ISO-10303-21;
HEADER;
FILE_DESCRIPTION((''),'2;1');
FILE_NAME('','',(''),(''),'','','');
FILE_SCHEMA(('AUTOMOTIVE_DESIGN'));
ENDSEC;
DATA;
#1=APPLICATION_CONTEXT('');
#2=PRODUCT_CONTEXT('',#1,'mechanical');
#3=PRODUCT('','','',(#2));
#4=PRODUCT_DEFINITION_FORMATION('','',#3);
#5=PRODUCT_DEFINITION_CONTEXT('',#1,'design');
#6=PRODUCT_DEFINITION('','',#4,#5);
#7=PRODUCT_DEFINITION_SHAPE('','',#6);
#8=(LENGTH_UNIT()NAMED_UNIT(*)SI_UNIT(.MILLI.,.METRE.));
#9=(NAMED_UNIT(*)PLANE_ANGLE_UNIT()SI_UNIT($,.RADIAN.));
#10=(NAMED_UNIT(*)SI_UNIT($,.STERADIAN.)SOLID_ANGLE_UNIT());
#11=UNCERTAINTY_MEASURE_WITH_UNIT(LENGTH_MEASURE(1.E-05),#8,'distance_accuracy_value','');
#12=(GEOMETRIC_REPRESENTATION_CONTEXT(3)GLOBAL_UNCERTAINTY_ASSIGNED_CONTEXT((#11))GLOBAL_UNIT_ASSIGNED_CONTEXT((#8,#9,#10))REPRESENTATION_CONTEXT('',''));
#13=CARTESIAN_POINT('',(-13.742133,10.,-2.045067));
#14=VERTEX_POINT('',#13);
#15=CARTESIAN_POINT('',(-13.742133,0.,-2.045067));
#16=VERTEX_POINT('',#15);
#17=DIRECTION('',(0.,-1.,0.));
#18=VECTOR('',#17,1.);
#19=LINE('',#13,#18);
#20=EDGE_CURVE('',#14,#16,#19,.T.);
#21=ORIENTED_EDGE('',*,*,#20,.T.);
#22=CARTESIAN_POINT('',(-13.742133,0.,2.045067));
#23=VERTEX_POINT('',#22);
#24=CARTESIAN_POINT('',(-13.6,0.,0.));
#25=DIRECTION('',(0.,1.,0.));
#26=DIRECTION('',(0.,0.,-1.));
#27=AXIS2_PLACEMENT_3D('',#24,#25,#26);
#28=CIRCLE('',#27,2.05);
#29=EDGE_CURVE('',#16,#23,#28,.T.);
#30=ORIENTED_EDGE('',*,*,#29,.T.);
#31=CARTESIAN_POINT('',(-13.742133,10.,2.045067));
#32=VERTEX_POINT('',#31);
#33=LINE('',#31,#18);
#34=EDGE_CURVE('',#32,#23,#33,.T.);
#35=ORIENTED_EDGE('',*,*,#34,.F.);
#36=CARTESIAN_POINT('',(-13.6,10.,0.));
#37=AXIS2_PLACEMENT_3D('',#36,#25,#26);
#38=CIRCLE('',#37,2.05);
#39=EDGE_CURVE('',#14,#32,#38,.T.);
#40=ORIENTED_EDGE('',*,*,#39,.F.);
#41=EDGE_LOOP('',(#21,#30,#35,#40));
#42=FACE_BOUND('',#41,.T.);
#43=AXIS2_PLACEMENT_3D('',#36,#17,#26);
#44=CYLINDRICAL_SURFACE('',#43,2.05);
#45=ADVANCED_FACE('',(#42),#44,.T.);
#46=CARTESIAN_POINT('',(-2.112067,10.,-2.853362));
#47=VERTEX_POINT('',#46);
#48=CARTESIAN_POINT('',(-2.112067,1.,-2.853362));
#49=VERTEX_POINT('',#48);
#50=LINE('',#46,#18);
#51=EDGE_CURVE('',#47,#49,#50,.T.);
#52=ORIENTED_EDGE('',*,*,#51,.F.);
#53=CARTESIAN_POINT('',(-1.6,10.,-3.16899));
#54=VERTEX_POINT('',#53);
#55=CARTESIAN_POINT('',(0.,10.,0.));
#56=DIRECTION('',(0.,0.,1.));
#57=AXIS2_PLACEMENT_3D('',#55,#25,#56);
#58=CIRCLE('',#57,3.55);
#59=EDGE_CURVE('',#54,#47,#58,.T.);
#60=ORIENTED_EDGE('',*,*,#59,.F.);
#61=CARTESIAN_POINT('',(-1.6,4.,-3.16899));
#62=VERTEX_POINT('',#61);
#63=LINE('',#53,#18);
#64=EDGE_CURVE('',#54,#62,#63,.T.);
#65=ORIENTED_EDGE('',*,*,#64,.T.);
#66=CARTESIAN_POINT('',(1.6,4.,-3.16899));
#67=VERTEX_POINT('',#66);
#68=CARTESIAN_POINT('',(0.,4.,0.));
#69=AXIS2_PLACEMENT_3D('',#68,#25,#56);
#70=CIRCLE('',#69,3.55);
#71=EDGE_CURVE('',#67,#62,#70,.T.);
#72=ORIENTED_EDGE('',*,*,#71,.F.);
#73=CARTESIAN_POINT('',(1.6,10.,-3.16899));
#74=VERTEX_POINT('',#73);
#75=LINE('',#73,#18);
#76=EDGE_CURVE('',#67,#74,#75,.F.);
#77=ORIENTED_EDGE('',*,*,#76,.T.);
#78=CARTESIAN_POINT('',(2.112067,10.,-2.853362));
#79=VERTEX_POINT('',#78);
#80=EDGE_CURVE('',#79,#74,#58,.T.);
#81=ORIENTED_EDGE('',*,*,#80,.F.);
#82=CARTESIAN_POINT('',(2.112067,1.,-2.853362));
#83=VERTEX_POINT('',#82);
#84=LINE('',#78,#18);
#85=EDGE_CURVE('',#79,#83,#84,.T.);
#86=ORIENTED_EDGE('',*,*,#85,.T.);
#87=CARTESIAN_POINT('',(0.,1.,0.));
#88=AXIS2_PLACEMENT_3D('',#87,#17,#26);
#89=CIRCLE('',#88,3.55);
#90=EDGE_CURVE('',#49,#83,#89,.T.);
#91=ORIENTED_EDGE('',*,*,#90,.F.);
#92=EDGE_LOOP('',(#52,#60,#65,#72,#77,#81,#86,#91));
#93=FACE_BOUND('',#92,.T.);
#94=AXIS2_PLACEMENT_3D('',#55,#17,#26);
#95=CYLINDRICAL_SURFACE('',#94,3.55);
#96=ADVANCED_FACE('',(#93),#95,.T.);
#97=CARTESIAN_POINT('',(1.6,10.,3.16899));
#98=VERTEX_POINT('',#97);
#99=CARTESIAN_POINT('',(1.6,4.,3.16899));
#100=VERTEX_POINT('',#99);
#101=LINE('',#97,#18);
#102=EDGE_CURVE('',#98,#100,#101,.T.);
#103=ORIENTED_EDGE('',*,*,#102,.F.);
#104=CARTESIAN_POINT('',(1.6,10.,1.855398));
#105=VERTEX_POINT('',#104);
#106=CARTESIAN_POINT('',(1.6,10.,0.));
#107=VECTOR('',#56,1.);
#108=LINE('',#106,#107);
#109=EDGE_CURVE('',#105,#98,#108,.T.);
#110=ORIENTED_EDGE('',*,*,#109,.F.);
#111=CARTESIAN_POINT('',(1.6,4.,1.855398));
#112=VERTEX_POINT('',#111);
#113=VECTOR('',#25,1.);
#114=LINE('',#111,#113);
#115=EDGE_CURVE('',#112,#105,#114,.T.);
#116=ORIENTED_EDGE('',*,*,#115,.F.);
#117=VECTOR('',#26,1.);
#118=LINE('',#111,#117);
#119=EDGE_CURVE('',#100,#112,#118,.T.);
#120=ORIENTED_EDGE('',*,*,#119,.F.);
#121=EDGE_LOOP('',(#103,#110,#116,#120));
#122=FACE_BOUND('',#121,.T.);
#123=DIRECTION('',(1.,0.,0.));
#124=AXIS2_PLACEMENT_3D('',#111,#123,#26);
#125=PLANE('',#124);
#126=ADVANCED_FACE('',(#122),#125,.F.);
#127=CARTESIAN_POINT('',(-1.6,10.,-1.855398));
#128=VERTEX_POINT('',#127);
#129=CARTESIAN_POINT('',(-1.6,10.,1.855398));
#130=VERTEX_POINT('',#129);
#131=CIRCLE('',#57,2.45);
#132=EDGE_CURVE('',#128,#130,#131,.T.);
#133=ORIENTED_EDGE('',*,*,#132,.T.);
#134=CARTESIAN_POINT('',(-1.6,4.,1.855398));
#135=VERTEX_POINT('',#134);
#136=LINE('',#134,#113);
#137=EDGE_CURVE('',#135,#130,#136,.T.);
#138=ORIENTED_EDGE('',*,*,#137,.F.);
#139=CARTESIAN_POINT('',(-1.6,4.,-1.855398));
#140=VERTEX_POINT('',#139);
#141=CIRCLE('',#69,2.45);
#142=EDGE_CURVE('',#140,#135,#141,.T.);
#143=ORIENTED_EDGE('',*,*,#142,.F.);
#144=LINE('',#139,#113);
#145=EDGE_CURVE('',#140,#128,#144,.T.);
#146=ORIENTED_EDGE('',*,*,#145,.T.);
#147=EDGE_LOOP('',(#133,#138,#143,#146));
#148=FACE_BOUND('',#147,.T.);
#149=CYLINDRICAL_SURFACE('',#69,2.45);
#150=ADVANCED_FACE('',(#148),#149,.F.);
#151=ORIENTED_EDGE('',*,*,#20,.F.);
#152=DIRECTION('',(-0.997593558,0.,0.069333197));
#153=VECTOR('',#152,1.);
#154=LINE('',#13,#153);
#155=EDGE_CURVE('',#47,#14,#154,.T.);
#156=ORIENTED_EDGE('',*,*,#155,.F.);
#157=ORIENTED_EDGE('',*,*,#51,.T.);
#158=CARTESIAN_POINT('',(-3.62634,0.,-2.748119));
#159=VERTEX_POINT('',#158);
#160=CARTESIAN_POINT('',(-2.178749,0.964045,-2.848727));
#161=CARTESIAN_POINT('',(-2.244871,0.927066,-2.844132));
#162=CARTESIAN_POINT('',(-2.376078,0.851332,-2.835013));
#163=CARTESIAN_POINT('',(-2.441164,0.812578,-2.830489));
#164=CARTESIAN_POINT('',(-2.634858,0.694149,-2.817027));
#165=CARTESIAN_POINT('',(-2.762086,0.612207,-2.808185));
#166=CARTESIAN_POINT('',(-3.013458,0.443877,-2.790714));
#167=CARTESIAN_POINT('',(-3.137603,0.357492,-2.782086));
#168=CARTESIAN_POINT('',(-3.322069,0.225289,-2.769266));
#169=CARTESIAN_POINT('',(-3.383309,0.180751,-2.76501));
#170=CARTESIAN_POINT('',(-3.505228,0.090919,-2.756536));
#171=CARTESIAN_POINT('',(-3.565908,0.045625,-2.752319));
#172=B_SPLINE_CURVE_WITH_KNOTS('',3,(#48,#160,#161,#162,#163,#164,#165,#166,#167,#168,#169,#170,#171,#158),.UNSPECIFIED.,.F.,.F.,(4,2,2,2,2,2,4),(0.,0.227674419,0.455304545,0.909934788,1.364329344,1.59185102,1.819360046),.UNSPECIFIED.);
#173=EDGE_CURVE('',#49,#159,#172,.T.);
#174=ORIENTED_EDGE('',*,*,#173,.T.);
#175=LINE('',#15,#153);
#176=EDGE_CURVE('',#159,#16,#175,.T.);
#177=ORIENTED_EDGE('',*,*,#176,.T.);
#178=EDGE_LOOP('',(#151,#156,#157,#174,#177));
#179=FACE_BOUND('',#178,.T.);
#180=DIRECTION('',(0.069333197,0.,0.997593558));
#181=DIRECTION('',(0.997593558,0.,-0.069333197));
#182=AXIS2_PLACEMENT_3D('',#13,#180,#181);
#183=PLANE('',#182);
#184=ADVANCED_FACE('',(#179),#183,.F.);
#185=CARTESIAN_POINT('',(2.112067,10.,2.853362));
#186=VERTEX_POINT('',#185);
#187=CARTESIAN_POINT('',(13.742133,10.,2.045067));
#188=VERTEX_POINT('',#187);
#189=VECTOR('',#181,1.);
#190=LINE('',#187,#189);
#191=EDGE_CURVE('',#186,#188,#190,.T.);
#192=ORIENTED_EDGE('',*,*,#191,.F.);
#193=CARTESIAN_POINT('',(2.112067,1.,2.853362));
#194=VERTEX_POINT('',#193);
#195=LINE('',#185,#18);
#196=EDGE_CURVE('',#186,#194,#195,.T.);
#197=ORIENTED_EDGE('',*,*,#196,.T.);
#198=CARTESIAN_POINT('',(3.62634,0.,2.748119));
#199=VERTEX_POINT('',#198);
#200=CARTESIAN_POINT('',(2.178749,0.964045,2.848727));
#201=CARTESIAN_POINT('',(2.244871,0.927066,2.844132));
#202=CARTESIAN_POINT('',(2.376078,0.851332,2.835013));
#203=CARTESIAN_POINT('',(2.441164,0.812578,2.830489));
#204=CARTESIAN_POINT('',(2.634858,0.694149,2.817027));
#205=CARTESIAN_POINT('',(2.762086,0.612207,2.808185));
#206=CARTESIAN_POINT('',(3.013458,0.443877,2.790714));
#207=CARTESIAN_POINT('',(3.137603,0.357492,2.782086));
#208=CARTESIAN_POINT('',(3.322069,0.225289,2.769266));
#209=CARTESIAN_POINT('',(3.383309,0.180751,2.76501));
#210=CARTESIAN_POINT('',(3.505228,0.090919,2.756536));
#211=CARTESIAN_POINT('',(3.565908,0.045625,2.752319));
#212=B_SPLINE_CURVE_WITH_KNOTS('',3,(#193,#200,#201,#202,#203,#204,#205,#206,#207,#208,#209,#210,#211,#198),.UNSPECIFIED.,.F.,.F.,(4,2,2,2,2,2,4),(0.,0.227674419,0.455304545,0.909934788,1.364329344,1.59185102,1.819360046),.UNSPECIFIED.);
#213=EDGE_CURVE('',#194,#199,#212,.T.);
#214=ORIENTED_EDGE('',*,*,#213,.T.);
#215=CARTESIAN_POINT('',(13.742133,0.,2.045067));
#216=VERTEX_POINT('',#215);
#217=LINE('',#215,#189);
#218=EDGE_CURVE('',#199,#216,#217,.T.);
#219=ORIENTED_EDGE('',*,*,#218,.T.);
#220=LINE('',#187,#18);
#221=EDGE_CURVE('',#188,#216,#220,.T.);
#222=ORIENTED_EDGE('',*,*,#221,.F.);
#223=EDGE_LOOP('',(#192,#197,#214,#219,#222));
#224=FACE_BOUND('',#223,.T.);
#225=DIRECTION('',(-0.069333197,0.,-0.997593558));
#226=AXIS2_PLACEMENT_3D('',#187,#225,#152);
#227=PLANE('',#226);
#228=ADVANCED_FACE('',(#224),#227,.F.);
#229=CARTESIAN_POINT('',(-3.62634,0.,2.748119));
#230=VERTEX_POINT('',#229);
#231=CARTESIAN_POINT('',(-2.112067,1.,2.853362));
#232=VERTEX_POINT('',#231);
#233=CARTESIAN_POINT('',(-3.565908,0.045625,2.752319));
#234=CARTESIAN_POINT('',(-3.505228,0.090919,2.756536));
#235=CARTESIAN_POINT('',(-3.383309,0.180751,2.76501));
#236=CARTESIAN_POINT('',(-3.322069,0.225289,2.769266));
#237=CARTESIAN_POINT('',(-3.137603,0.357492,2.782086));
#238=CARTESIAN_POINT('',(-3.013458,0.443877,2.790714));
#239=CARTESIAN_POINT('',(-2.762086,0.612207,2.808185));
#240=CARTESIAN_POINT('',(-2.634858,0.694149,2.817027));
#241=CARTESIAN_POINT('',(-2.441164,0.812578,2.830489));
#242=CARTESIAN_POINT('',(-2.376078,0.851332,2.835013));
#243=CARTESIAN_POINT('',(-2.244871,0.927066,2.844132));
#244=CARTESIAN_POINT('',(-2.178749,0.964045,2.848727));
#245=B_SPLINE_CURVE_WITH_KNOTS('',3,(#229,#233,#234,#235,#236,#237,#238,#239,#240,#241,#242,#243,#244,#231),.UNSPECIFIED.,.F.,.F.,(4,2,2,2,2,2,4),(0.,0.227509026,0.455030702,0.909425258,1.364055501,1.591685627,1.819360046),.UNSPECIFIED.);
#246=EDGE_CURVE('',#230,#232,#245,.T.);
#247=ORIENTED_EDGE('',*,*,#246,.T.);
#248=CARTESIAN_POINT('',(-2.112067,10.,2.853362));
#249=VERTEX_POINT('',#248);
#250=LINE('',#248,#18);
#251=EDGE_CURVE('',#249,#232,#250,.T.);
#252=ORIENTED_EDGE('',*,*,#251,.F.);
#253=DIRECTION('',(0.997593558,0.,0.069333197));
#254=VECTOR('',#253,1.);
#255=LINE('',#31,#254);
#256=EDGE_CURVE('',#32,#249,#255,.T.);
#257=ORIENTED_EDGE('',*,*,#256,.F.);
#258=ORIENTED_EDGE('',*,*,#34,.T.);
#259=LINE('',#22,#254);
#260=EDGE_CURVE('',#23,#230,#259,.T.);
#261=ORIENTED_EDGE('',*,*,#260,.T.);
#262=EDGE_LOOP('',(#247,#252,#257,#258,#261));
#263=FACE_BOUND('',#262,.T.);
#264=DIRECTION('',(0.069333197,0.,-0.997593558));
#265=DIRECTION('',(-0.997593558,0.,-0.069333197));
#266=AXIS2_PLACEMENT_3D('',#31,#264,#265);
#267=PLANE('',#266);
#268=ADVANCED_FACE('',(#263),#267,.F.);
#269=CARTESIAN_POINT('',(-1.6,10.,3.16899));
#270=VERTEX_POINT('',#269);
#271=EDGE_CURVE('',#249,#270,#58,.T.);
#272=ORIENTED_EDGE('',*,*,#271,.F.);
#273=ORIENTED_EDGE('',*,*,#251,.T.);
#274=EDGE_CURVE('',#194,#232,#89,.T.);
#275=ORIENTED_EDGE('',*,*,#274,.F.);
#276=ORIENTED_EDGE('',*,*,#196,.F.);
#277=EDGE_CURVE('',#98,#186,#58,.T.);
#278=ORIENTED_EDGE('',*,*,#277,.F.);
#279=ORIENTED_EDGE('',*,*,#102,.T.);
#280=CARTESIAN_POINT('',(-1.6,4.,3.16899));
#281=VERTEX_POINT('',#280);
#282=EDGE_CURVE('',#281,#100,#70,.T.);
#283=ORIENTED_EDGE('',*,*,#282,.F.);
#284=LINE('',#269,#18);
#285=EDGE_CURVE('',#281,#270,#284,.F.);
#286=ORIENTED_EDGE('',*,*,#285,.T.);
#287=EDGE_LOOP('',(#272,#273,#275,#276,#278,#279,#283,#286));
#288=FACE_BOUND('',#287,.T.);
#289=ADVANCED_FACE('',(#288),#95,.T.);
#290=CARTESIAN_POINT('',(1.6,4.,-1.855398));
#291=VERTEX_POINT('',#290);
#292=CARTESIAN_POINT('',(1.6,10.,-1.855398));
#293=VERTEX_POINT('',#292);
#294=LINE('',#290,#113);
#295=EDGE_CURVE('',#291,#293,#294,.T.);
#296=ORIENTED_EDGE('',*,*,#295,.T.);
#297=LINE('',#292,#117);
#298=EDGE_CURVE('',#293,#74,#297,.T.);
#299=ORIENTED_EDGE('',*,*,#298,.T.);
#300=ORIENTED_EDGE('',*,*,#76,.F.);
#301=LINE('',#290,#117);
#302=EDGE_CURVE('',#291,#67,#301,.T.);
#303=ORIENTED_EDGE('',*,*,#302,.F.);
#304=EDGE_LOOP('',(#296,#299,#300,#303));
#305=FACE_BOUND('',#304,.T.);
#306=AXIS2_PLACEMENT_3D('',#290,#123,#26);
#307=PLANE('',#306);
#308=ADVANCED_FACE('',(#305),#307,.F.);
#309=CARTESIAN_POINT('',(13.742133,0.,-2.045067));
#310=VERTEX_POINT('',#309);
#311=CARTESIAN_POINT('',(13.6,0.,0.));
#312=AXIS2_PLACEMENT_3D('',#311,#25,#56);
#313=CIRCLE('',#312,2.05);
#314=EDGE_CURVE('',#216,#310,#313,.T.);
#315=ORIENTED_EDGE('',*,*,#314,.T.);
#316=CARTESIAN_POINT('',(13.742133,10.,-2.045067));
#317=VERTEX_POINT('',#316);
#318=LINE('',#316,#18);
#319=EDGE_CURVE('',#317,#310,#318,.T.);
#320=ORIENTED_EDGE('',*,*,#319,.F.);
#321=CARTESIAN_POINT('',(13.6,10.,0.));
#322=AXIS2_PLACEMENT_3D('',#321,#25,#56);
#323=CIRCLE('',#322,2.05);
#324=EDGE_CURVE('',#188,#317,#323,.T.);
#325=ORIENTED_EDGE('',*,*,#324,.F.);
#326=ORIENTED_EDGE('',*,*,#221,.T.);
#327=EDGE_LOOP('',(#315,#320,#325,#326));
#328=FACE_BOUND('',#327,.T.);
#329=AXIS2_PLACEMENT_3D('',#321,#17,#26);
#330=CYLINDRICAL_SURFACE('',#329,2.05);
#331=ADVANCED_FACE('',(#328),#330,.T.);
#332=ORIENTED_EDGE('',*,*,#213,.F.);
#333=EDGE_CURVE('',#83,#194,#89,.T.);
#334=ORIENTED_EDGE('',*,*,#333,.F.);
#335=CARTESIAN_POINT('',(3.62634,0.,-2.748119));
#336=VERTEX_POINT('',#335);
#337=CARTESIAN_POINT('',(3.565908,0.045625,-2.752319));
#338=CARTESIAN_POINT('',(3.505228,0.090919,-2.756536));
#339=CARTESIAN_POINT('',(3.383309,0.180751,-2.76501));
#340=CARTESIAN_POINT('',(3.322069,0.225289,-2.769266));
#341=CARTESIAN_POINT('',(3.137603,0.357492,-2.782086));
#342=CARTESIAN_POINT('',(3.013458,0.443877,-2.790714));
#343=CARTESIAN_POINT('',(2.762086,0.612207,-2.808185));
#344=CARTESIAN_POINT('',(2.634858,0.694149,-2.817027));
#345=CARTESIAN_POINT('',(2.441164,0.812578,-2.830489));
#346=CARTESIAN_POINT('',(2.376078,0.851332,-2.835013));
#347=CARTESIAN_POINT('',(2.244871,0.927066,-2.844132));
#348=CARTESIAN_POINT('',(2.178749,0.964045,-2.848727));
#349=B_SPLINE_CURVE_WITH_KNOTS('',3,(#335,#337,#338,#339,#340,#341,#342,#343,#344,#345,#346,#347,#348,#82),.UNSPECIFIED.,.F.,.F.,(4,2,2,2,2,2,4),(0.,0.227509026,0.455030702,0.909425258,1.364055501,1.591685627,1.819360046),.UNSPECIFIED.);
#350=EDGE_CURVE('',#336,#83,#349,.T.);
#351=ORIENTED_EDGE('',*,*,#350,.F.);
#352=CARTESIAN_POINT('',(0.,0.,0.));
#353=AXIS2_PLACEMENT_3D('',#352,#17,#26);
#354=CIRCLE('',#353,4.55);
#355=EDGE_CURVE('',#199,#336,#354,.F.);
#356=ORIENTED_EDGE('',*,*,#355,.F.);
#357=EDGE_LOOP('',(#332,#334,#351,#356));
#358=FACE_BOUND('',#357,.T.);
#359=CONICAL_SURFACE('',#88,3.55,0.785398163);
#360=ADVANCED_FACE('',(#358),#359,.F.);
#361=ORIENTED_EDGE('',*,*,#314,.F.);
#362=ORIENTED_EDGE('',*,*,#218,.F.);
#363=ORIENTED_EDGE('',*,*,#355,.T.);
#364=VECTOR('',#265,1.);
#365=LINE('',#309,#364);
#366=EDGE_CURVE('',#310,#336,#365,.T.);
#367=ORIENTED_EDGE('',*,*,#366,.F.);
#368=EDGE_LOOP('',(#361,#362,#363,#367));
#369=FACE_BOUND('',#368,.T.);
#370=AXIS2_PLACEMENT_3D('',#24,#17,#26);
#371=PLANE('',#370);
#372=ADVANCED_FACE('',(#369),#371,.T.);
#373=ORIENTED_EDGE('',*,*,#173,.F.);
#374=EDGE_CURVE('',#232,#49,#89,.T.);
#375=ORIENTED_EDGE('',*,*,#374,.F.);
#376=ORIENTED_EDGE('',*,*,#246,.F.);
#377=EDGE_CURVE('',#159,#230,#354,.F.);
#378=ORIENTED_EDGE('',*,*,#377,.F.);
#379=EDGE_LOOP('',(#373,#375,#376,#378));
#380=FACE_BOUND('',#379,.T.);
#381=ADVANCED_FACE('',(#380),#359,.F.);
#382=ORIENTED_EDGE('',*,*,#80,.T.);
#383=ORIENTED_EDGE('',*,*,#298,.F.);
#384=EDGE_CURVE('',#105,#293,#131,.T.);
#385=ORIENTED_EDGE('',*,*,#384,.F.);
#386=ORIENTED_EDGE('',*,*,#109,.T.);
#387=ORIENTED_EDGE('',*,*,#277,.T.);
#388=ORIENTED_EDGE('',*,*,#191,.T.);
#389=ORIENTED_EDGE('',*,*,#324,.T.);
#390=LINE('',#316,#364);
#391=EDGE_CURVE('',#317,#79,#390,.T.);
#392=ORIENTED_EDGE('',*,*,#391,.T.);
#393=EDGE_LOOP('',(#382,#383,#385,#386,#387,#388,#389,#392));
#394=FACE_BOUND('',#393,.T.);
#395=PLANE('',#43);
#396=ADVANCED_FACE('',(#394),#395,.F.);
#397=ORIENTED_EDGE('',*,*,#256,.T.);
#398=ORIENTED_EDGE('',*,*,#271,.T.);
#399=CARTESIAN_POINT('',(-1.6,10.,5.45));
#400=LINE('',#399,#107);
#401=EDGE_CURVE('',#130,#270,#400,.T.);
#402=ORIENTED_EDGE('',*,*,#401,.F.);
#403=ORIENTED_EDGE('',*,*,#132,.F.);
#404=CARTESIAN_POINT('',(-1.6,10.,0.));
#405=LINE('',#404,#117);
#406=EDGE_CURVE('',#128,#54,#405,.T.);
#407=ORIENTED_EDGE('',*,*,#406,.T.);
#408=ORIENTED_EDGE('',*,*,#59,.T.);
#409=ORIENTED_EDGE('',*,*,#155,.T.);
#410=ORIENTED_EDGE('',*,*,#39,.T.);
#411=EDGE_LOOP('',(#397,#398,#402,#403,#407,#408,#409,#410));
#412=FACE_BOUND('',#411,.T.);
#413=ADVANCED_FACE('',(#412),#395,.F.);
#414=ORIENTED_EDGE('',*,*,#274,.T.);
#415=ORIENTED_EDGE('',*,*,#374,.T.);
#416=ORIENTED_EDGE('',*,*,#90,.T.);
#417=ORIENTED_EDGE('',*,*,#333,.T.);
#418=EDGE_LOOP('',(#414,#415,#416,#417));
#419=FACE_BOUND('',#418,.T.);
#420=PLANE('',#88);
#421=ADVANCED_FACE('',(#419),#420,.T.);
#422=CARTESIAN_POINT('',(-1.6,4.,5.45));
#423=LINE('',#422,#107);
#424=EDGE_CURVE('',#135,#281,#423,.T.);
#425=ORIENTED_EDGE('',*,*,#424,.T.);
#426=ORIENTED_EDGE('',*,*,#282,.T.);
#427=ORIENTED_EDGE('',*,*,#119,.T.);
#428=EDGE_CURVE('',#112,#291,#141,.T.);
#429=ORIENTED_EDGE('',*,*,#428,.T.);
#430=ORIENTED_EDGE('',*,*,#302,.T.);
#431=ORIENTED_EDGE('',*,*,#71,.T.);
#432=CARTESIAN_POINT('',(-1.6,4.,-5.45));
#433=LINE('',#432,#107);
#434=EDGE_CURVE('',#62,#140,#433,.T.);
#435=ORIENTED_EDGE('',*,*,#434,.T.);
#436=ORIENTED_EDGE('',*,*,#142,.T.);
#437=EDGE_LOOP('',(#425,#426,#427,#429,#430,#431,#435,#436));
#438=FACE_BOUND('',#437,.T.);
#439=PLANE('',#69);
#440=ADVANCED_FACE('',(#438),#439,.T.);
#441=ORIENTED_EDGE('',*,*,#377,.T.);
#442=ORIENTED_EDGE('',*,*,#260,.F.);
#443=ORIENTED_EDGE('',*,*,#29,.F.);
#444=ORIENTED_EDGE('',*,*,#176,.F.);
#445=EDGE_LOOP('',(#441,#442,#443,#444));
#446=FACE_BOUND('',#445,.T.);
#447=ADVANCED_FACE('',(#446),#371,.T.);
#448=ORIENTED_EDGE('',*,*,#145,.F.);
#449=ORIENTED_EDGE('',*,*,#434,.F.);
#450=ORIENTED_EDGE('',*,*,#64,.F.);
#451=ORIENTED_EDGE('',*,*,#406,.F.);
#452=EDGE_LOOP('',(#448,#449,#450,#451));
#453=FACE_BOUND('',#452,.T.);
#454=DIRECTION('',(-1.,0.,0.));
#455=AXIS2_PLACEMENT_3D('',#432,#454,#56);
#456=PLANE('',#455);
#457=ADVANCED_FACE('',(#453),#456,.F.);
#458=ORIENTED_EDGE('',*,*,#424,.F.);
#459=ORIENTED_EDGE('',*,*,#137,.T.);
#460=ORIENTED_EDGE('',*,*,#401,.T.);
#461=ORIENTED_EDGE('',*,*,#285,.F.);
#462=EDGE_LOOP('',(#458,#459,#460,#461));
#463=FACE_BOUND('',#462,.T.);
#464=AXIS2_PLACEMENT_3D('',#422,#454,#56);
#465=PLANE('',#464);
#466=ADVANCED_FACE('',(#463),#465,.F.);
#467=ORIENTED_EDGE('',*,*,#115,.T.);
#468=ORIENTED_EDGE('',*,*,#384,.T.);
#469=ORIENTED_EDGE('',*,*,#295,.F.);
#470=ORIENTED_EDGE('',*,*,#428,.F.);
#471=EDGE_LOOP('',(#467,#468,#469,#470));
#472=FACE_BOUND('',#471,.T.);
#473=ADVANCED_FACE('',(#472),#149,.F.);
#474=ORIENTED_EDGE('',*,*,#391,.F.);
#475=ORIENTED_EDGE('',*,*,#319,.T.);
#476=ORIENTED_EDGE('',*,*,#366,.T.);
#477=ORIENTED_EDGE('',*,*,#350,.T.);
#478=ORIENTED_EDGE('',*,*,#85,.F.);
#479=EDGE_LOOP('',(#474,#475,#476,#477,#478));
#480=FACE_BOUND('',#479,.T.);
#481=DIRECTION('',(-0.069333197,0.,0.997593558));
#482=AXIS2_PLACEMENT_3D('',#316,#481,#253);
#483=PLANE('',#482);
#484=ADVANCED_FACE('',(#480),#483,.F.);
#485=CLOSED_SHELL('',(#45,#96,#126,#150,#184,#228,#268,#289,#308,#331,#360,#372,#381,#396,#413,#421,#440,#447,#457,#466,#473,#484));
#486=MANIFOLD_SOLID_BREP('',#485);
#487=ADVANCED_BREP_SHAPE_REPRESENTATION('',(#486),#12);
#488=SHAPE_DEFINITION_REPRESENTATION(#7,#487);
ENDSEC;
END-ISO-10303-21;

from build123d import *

# Parameters (mm, degrees)
BOSS_EXTRUDE1_DEPTH = 10
CUT_EXTRUDE1_DEPTH  = 1
CHAMFER1_SIZE       = 1
CUT_EXTRUDE2_DEPTH  = 6


with BuildPart() as part:
    # Sketch2 → Boss-Extrude1 (new body)
    with BuildSketch(Plane(origin=(0, 0, 0), x_dir=(1, 0, 0), z_dir=(0, 1, 0))):
        with BuildLine():
            Line((-13.742133053, -2.045066795), (-2.112067201, -2.853361551))
            ThreePointArc((-2.112067201, -2.853361551), (0, -3.55), (2.112067201, -2.853361551))
            Line((2.112067201, -2.853361551), (13.742133053, -2.045066795))
            ThreePointArc((13.742133053, -2.045066795), (15.65, 0), (13.742133053, 2.045066795))
            Line((13.742133053, 2.045066795), (2.112067201, 2.853361551))
            ThreePointArc((2.112067201, 2.853361551), (0, 3.55), (-2.112067201, 2.853361551))
            Line((-2.112067201, 2.853361551), (-13.742133053, 2.045066795))
            ThreePointArc((-13.742133053, 2.045066795), (-15.65, 0), (-13.742133053, -2.045066795))
        make_face()
    extrude(amount=BOSS_EXTRUDE1_DEPTH)

    # Sketch3 → Cut-Extrude1 (cut)
    with BuildSketch(Plane.XZ):
        with BuildLine():
            ThreePointArc((-2.112067201, 2.853361551), (0, -3.55), (2.112067201, 2.853361551))
            ThreePointArc((2.112067201, 2.853361551), (0, 3.55), (-2.112067201, 2.853361551))
        make_face()
    extrude(amount=-CUT_EXTRUDE1_DEPTH, mode=Mode.SUBTRACT)

    # Chamfer1
    chamfer1_edges = [part.edges().sort_by_distance(p)[0] for p in [
        (3.55, 0, 0),
        (-3.55, 0, 0),
    ]]
    chamfer(chamfer1_edges, length=CHAMFER1_SIZE - 0.0001)  # a hair under: the kernel refuses the full size

    # Shaft Key → Cut-Extrude2 (cut)
    with BuildSketch(Plane(origin=(0, 10, 0), x_dir=(1, 0, 0), z_dir=(0, 1, 0))):
        with BuildLine():
            Line((1.6, -1.855397532), (1.6, -5.45))
            Line((1.6, -5.45), (-1.6, -5.45))
            Line((-1.6, -5.45), (-1.6, -1.855397532))
            ThreePointArc((-1.6, -1.855397532), (-2.45, 0), (-1.6, 1.855397532))
            Line((-1.6, 1.855397532), (-1.6, 5.45))
            Line((-1.6, 5.45), (1.6, 5.45))
            Line((1.6, 5.45), (1.6, 1.855397532))
            ThreePointArc((1.6, 1.855397532), (2.45, 0), (1.6, -1.855397532))
        make_face()
    extrude(amount=-CUT_EXTRUDE2_DEPTH, mode=Mode.SUBTRACT)


solid = part.part
